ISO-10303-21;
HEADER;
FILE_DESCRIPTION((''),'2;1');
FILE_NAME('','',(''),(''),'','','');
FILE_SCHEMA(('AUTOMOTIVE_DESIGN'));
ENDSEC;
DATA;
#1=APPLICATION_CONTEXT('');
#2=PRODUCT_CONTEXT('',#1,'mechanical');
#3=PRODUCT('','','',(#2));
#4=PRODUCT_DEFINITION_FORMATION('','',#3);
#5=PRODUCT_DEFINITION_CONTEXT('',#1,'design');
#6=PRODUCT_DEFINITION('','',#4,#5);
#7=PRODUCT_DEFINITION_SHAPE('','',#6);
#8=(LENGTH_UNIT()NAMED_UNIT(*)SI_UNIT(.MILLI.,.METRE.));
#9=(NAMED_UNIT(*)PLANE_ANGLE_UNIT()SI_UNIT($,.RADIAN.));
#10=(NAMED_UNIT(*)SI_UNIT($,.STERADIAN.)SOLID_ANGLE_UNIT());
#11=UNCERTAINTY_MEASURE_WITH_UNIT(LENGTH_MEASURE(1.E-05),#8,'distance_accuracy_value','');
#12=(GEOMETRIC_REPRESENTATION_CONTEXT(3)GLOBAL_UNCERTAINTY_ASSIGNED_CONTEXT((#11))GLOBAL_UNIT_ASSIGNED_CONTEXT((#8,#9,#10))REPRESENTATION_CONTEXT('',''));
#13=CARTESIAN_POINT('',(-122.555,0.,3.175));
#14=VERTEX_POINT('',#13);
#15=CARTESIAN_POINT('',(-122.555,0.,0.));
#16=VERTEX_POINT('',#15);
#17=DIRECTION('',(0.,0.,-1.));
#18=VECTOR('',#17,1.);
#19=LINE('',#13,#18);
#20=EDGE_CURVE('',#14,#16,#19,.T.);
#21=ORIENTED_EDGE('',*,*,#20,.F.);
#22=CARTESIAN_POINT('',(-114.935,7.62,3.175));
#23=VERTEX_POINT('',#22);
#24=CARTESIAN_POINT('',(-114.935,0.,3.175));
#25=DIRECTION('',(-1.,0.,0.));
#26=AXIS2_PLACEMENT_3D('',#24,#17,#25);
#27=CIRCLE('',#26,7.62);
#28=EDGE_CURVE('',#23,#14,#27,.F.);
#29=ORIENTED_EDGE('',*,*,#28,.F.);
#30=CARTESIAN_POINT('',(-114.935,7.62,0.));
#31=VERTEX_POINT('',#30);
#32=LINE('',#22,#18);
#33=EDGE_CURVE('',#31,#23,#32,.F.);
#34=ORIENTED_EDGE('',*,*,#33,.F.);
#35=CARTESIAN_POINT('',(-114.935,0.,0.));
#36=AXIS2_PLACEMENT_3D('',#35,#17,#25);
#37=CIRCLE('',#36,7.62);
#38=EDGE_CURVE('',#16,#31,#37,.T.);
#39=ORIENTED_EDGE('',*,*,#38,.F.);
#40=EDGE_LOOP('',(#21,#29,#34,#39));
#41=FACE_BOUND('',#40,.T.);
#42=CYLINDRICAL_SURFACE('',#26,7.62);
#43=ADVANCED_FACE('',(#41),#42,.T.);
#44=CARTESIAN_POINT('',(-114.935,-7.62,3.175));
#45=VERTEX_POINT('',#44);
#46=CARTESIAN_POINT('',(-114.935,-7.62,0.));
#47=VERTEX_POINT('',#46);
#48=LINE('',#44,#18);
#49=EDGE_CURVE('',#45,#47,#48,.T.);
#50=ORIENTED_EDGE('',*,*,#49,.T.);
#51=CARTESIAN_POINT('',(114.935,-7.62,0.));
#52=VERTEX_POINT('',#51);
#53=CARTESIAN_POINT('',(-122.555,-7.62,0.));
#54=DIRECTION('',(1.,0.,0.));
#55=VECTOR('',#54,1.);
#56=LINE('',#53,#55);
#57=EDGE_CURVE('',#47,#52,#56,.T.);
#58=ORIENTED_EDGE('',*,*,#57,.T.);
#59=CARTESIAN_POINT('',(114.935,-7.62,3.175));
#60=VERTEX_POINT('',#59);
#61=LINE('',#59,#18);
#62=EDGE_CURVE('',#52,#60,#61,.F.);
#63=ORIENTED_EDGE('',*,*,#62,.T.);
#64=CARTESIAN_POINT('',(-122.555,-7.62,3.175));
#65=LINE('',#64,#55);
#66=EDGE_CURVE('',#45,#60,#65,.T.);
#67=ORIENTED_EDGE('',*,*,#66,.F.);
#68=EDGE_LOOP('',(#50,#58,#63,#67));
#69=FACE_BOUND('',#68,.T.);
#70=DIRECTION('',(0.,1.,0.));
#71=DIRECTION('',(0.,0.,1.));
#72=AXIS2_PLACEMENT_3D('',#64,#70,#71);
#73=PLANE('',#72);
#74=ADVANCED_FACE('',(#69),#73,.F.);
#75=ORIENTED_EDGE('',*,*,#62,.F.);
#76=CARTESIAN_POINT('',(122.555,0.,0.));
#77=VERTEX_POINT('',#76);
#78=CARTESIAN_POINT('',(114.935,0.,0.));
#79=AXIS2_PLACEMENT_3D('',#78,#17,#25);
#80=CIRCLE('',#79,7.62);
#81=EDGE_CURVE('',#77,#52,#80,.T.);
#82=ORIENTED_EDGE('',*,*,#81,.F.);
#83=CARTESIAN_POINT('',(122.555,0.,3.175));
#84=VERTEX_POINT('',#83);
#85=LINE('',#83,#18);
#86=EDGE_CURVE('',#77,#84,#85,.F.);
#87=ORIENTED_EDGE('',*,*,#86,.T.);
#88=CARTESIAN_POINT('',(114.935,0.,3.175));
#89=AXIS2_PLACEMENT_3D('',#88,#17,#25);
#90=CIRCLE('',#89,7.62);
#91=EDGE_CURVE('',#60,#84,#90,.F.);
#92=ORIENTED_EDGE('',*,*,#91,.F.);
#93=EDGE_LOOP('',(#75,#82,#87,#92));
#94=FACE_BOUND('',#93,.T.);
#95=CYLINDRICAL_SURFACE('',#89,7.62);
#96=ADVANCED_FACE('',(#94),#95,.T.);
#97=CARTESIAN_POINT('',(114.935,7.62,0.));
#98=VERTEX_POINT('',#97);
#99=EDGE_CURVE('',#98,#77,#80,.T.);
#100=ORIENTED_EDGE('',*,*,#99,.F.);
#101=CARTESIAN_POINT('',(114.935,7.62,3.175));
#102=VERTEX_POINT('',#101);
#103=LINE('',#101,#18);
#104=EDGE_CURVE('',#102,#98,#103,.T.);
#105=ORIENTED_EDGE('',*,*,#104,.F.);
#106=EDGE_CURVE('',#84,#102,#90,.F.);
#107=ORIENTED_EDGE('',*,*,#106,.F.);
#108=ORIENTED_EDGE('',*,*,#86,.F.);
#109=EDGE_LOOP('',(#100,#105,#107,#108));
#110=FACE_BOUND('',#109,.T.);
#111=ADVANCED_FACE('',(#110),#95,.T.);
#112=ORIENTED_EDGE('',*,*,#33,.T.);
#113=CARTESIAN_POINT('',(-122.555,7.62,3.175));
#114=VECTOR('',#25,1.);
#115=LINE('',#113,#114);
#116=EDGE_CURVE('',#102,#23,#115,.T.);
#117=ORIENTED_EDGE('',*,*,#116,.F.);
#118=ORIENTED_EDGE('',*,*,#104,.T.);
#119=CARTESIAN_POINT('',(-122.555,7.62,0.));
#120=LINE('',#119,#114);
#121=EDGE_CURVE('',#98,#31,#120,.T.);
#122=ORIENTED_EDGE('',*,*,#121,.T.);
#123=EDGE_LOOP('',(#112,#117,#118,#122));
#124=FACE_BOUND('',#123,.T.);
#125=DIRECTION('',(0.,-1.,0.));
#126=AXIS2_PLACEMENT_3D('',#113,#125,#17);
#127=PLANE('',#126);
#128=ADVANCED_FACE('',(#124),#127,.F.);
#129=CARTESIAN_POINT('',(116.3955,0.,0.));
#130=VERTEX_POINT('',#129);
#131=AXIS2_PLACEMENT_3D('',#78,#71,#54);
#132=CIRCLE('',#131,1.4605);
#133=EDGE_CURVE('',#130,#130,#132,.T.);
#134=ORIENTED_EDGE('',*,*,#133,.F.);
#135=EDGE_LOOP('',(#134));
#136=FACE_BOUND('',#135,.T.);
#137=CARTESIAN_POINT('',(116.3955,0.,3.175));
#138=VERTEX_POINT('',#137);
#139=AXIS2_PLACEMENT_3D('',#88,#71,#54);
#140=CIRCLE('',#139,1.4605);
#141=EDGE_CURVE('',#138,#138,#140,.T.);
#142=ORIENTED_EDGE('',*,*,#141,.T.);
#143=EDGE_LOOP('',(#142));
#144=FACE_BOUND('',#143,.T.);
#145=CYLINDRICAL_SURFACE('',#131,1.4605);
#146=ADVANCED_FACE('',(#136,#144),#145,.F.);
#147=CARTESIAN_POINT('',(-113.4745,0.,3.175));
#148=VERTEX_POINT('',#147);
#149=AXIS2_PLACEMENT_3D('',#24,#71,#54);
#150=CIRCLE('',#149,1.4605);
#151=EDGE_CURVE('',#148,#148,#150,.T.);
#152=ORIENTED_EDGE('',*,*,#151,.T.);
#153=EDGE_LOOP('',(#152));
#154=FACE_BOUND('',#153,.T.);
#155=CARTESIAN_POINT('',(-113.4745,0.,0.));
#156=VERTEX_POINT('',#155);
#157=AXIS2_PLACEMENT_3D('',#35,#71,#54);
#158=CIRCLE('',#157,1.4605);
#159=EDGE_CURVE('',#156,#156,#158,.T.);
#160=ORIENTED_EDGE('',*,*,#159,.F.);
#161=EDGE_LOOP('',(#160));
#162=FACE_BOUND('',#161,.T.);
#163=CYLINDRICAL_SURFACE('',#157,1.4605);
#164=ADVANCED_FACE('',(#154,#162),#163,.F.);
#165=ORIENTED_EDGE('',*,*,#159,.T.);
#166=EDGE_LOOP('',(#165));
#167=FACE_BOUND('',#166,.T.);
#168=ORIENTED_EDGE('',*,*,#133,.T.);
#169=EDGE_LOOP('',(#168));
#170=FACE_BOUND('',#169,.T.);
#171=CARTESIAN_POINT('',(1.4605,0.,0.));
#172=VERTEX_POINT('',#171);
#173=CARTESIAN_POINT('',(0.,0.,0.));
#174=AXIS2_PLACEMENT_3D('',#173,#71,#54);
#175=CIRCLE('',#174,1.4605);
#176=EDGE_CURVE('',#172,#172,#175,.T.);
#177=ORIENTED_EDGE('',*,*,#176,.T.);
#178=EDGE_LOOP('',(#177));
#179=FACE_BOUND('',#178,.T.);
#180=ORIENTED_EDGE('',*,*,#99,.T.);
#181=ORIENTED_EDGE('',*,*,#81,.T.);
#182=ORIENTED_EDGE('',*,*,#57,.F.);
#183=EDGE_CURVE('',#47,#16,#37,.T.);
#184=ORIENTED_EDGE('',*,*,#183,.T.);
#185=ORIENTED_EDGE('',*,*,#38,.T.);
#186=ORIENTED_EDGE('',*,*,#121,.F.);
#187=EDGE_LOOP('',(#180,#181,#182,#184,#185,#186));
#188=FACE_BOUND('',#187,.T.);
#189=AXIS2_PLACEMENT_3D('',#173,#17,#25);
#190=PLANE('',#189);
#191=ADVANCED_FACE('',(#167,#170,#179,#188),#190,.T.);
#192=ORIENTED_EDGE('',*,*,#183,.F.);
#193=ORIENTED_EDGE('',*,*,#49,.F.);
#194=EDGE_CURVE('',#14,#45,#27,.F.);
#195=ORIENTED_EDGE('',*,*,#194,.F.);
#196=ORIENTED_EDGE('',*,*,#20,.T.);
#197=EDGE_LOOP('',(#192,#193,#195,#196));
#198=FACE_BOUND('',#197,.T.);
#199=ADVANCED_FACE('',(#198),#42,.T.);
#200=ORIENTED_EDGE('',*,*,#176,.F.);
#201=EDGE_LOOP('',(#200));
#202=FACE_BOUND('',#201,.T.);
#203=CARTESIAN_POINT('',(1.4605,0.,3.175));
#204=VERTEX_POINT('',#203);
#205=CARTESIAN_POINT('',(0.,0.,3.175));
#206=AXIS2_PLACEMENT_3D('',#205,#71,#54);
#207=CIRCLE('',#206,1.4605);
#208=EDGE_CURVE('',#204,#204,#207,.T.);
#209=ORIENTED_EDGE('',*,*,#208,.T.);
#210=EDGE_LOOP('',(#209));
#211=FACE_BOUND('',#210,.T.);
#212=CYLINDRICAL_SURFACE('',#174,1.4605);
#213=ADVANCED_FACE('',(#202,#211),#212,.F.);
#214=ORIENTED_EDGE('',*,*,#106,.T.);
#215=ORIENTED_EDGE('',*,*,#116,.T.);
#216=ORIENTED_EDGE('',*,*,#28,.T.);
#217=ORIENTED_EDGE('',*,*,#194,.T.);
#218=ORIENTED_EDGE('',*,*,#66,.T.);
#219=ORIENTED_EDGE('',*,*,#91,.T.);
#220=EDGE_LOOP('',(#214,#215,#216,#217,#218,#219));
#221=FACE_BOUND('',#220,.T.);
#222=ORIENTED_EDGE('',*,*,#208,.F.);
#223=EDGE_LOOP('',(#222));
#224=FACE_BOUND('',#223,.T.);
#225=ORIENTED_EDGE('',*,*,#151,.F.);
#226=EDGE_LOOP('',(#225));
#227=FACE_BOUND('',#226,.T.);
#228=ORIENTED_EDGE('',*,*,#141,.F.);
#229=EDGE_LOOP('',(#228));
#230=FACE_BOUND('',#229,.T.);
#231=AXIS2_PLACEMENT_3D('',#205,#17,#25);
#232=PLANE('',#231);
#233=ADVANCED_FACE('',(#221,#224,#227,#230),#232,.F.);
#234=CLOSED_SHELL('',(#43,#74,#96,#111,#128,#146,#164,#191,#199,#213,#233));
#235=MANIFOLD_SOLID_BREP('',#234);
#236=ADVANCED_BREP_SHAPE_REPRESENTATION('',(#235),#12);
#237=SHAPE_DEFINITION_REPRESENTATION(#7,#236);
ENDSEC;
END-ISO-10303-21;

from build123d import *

# Parameters (mm, degrees)
SKETCH1_W           = 245.11
SKETCH1_H           = 15.24
BOSS_EXTRUDE1_DEPTH = 3.175
FILLET2_R           = 7.62
SKETCH3_R           = 1.4605
CUT_EXTRUDE1_DEPTH  = 123.832703504


with BuildPart() as part:
    # Sketch1 → Boss-Extrude1 (new body)
    with BuildSketch(Plane.XY):
        Rectangle(SKETCH1_W, SKETCH1_H)
    extrude(amount=BOSS_EXTRUDE1_DEPTH)

    # Fillet2
    fillet2_edges = [part.edges().sort_by_distance(p)[0] for p in [
        (-122.555, -7.62, 1.5875),
        (-122.555, 7.62, 1.5875),
        (122.555, -7.62, 1.5875),
        (122.555, 7.62, 1.5875),
    ]]
    fillet(fillet2_edges, radius=FILLET2_R - 0.0001)  # a hair under: the kernel refuses the full size

    # Sketch3 → Cut-Extrude1 (cut, through all)
    with BuildSketch(Plane.XY.offset(3.175)):
        with Locations((-114.935, 0)):
            Circle(SKETCH3_R)
        with Locations((114.935, 0)):
            Circle(SKETCH3_R)
        Circle(SKETCH3_R)
    extrude(amount=-CUT_EXTRUDE1_DEPTH, mode=Mode.SUBTRACT)


solid = part.part
